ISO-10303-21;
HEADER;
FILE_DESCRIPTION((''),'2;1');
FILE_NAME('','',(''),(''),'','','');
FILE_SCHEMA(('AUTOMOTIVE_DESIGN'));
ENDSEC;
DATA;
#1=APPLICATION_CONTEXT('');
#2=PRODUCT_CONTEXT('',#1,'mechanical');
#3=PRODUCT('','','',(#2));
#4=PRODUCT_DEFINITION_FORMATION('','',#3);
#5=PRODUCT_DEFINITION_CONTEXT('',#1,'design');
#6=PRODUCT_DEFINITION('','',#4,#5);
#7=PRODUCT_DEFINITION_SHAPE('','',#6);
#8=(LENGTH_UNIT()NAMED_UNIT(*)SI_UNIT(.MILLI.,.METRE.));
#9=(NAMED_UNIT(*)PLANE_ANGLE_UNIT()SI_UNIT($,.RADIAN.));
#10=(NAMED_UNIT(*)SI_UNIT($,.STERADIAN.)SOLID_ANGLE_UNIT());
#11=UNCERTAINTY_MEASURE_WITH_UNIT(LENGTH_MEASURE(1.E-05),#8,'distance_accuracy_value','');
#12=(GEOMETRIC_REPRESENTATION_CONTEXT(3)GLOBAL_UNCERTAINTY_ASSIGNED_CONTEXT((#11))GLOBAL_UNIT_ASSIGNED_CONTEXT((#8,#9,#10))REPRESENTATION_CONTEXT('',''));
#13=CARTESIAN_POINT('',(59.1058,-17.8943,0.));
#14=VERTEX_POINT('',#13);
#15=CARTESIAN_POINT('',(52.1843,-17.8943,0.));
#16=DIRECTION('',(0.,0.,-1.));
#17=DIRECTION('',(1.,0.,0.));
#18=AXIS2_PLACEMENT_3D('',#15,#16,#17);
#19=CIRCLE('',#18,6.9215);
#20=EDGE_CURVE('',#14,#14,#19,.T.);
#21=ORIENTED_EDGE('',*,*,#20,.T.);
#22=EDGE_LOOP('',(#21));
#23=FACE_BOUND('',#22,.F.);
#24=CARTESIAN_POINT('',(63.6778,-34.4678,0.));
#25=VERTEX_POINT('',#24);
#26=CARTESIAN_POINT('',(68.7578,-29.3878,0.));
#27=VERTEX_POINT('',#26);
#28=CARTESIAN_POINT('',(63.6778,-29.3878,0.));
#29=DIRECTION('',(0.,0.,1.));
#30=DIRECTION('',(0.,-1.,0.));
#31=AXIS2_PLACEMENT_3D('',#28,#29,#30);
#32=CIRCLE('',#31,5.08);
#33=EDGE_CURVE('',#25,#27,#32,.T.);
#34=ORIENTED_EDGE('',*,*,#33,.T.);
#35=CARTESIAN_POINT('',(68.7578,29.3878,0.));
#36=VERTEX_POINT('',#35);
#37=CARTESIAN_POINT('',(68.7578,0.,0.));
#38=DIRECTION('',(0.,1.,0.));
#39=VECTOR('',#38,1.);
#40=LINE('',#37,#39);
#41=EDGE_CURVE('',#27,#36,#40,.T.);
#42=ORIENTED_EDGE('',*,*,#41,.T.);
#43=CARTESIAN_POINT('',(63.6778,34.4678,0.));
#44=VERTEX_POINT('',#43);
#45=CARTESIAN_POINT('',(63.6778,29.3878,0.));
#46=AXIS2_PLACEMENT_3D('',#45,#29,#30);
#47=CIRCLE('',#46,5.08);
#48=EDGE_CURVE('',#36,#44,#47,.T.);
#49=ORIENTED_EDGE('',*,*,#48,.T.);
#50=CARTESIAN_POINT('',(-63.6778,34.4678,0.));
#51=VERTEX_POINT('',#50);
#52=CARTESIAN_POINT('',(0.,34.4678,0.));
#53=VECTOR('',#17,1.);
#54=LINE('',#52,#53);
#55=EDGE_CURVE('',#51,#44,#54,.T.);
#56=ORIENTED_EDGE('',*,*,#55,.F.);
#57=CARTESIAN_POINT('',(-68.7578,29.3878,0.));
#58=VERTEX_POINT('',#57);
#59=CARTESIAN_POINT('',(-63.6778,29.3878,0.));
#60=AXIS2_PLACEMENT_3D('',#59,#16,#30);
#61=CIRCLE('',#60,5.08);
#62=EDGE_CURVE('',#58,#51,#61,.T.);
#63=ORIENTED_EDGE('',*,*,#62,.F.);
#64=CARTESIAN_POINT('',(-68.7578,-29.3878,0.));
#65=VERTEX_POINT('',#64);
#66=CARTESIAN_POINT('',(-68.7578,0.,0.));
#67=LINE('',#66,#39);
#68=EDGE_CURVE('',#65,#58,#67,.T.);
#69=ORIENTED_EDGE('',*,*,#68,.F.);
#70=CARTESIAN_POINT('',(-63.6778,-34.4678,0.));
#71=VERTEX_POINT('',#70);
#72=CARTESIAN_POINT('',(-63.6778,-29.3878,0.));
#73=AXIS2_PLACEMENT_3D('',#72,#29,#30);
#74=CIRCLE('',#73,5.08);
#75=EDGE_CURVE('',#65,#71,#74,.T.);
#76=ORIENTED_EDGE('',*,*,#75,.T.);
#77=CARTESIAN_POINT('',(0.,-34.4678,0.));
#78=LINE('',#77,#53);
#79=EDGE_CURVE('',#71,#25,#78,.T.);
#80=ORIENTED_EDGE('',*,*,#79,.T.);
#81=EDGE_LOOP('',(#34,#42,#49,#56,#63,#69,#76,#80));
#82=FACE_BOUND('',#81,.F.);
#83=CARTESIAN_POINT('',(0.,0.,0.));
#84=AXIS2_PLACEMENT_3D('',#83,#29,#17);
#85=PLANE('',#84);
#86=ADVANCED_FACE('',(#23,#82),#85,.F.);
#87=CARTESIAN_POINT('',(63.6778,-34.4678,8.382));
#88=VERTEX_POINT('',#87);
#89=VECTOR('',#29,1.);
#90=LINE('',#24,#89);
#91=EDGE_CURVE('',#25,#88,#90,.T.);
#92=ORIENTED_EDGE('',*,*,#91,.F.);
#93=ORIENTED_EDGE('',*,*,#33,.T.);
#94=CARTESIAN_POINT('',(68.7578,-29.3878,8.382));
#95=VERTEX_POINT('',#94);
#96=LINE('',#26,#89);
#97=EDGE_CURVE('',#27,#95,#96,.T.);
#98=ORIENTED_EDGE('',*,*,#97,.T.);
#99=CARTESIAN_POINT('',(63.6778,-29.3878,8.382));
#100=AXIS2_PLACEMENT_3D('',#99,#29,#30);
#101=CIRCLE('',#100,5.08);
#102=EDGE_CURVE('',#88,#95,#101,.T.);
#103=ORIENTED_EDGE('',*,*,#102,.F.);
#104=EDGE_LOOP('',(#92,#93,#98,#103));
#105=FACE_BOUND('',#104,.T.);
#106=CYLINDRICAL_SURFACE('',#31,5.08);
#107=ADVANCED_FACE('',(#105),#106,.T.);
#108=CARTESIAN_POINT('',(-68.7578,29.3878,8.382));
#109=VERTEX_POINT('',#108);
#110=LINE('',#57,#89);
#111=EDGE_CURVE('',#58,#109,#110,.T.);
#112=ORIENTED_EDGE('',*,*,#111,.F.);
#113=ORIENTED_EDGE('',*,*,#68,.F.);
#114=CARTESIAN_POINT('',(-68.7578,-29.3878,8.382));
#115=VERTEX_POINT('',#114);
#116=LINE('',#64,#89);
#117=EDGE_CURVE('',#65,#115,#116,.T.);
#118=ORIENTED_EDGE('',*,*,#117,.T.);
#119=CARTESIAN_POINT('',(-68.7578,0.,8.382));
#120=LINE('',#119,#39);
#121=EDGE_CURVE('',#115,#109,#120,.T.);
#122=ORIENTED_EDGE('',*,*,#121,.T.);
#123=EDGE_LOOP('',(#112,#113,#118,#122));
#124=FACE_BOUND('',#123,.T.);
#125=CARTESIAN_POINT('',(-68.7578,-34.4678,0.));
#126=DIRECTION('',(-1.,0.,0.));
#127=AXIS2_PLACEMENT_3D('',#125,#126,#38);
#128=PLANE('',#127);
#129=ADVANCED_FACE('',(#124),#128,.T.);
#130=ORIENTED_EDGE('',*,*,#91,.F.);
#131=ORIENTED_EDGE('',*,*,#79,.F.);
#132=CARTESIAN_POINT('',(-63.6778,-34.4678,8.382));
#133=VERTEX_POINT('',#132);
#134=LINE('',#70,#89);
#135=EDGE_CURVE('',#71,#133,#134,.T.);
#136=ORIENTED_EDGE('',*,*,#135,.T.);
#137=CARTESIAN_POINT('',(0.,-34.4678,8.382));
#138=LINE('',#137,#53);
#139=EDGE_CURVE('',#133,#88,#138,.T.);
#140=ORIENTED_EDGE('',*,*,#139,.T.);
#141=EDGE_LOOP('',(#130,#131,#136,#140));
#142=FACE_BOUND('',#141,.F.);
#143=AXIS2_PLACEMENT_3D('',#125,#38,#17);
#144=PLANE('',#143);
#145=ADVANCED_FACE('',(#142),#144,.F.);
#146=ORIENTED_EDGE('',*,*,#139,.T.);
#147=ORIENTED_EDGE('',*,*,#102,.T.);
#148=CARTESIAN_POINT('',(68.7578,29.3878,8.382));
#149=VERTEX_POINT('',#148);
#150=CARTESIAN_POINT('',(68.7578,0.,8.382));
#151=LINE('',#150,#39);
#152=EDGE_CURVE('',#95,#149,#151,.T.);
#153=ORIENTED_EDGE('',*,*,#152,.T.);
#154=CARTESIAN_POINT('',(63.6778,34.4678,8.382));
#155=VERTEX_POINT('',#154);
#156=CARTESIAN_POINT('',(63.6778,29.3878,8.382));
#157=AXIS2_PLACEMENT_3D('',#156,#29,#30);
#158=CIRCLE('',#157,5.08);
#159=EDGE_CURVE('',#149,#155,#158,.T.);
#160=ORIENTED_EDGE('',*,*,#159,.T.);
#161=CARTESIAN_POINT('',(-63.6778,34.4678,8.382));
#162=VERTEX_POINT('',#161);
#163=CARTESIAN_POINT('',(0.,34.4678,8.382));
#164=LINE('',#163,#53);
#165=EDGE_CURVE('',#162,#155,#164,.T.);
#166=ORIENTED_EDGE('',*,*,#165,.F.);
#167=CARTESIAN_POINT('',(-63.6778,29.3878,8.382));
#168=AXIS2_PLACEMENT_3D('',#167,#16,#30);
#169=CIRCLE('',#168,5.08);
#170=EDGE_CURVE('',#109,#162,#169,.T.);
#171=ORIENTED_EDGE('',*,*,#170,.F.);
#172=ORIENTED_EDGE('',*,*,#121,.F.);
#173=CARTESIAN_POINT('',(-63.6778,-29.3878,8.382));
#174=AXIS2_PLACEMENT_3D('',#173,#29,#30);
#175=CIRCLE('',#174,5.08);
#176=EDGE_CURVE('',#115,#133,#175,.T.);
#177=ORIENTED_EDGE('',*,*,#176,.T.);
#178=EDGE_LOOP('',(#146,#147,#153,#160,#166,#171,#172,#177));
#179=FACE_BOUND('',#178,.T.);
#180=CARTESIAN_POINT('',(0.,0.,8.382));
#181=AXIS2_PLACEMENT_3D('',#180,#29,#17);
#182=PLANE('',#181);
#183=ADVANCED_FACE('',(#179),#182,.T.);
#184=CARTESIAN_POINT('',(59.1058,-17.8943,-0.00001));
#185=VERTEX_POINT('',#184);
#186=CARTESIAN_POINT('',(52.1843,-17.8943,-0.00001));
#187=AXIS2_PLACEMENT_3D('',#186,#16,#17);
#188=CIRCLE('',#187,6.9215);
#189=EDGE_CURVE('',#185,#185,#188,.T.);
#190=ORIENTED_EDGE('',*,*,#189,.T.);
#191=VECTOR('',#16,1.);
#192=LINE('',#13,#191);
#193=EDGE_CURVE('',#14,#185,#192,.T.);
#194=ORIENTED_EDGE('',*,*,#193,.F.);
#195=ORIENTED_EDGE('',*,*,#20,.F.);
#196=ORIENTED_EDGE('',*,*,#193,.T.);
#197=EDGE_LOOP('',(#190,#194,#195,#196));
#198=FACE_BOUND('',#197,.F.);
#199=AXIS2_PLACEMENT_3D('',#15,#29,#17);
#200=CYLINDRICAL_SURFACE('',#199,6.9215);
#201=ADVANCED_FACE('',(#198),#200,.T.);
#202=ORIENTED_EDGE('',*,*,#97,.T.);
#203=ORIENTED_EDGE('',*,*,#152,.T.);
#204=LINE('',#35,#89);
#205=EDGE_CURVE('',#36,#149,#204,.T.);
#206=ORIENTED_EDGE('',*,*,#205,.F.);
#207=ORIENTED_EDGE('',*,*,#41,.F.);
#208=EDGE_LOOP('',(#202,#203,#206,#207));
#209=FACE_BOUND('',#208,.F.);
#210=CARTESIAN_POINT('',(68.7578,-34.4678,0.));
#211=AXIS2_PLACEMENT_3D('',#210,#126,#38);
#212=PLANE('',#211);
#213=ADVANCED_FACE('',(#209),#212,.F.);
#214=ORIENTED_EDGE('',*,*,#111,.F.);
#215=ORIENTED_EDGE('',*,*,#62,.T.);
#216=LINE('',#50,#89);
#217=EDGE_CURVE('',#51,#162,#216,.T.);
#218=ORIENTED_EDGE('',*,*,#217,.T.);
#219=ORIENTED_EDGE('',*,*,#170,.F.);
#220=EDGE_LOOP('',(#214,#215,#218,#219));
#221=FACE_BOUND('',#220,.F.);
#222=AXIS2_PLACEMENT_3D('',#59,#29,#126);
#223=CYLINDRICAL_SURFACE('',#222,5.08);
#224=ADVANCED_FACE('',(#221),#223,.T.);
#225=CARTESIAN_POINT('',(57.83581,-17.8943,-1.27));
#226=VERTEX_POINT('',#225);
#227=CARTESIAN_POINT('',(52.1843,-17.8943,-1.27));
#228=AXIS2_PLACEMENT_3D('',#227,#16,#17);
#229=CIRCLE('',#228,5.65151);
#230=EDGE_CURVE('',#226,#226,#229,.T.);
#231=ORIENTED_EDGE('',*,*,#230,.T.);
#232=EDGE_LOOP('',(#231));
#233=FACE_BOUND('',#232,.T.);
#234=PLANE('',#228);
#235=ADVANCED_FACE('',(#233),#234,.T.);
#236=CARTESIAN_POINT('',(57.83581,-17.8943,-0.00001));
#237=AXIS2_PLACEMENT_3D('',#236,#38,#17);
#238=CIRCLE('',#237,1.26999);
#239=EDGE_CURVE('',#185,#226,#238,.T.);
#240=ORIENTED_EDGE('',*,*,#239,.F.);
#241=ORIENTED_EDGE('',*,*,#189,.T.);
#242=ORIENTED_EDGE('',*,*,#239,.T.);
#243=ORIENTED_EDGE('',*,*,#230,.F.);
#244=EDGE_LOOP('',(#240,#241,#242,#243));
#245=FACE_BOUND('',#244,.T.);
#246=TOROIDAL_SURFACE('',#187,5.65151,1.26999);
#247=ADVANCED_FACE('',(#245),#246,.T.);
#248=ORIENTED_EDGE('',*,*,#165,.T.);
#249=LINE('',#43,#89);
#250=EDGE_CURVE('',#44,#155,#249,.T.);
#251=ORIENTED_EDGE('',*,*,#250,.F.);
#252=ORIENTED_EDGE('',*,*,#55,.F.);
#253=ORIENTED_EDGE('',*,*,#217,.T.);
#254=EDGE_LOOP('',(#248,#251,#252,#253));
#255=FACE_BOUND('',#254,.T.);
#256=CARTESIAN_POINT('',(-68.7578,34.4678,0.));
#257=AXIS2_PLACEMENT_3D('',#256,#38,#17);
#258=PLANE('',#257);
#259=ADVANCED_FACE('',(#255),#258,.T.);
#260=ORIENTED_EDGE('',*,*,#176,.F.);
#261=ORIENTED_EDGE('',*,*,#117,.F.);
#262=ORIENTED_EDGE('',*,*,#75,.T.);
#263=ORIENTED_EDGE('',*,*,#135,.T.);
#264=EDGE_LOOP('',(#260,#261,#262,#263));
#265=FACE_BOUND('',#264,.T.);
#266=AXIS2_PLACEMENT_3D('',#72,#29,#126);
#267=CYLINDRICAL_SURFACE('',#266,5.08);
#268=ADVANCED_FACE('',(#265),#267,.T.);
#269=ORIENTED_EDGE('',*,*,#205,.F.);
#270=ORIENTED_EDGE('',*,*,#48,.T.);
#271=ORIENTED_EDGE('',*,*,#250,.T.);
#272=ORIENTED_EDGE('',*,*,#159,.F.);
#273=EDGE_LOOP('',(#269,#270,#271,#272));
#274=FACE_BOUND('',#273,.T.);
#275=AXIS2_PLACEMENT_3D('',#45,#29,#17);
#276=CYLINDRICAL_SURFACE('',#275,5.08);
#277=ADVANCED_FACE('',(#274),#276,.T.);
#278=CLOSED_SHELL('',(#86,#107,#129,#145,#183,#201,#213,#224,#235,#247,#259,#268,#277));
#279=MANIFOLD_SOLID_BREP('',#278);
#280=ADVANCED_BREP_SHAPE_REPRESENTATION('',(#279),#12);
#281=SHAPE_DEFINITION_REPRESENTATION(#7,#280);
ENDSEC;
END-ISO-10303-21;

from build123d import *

# Parameters (mm, degrees)
F0_W     = 137.5156
F0_H     = 68.9356
F1_DEPTH = 8.382
F2_R     = 5.08
F3_R     = 6.9215
F4_DEPTH = 1.27
F5_R     = 1.26999


# Not quite as in the source:
# - a fillet or chamfer is up to 0.001 mm smaller than in the source, because OpenCascade refuses the exact size


with BuildPart() as f1:
    # F0 (on Top) → F1 (new body)
    with BuildSketch(Plane.XY):
        Rectangle(F0_W, F0_H)
    extrude(amount=F1_DEPTH)

    # F2
    f2_edges = [f1.edges().sort_by_distance(p)[0] for p in [
        (-68.7578, 34.4678, 4.191),
        (-68.7578, -34.4678, 4.191),
        (68.7578, -34.4678, 4.191),
        (68.7578, 34.4678, 4.191),
    ]]
    fillet(f2_edges, radius=F2_R)

    # F3 (on face) → F4 (join)
    with BuildSketch(Plane(origin=(0, 0, 0), x_dir=(1, 0, 0), z_dir=(0, 0, -1))):
        with Locations((52.1843, 17.8943)):
            Circle(F3_R)
    extrude(amount=F4_DEPTH)

    # F5 (radius 1.27 in the source; OpenCascade refuses exactly that, so slightly less here)
    f5_edges = [f1.edges().sort_by_distance(p)[0] for p in [
        (45.2628, -17.8943, -1.27),
    ]]
    fillet(f5_edges, radius=F5_R)


solid = f1.part
